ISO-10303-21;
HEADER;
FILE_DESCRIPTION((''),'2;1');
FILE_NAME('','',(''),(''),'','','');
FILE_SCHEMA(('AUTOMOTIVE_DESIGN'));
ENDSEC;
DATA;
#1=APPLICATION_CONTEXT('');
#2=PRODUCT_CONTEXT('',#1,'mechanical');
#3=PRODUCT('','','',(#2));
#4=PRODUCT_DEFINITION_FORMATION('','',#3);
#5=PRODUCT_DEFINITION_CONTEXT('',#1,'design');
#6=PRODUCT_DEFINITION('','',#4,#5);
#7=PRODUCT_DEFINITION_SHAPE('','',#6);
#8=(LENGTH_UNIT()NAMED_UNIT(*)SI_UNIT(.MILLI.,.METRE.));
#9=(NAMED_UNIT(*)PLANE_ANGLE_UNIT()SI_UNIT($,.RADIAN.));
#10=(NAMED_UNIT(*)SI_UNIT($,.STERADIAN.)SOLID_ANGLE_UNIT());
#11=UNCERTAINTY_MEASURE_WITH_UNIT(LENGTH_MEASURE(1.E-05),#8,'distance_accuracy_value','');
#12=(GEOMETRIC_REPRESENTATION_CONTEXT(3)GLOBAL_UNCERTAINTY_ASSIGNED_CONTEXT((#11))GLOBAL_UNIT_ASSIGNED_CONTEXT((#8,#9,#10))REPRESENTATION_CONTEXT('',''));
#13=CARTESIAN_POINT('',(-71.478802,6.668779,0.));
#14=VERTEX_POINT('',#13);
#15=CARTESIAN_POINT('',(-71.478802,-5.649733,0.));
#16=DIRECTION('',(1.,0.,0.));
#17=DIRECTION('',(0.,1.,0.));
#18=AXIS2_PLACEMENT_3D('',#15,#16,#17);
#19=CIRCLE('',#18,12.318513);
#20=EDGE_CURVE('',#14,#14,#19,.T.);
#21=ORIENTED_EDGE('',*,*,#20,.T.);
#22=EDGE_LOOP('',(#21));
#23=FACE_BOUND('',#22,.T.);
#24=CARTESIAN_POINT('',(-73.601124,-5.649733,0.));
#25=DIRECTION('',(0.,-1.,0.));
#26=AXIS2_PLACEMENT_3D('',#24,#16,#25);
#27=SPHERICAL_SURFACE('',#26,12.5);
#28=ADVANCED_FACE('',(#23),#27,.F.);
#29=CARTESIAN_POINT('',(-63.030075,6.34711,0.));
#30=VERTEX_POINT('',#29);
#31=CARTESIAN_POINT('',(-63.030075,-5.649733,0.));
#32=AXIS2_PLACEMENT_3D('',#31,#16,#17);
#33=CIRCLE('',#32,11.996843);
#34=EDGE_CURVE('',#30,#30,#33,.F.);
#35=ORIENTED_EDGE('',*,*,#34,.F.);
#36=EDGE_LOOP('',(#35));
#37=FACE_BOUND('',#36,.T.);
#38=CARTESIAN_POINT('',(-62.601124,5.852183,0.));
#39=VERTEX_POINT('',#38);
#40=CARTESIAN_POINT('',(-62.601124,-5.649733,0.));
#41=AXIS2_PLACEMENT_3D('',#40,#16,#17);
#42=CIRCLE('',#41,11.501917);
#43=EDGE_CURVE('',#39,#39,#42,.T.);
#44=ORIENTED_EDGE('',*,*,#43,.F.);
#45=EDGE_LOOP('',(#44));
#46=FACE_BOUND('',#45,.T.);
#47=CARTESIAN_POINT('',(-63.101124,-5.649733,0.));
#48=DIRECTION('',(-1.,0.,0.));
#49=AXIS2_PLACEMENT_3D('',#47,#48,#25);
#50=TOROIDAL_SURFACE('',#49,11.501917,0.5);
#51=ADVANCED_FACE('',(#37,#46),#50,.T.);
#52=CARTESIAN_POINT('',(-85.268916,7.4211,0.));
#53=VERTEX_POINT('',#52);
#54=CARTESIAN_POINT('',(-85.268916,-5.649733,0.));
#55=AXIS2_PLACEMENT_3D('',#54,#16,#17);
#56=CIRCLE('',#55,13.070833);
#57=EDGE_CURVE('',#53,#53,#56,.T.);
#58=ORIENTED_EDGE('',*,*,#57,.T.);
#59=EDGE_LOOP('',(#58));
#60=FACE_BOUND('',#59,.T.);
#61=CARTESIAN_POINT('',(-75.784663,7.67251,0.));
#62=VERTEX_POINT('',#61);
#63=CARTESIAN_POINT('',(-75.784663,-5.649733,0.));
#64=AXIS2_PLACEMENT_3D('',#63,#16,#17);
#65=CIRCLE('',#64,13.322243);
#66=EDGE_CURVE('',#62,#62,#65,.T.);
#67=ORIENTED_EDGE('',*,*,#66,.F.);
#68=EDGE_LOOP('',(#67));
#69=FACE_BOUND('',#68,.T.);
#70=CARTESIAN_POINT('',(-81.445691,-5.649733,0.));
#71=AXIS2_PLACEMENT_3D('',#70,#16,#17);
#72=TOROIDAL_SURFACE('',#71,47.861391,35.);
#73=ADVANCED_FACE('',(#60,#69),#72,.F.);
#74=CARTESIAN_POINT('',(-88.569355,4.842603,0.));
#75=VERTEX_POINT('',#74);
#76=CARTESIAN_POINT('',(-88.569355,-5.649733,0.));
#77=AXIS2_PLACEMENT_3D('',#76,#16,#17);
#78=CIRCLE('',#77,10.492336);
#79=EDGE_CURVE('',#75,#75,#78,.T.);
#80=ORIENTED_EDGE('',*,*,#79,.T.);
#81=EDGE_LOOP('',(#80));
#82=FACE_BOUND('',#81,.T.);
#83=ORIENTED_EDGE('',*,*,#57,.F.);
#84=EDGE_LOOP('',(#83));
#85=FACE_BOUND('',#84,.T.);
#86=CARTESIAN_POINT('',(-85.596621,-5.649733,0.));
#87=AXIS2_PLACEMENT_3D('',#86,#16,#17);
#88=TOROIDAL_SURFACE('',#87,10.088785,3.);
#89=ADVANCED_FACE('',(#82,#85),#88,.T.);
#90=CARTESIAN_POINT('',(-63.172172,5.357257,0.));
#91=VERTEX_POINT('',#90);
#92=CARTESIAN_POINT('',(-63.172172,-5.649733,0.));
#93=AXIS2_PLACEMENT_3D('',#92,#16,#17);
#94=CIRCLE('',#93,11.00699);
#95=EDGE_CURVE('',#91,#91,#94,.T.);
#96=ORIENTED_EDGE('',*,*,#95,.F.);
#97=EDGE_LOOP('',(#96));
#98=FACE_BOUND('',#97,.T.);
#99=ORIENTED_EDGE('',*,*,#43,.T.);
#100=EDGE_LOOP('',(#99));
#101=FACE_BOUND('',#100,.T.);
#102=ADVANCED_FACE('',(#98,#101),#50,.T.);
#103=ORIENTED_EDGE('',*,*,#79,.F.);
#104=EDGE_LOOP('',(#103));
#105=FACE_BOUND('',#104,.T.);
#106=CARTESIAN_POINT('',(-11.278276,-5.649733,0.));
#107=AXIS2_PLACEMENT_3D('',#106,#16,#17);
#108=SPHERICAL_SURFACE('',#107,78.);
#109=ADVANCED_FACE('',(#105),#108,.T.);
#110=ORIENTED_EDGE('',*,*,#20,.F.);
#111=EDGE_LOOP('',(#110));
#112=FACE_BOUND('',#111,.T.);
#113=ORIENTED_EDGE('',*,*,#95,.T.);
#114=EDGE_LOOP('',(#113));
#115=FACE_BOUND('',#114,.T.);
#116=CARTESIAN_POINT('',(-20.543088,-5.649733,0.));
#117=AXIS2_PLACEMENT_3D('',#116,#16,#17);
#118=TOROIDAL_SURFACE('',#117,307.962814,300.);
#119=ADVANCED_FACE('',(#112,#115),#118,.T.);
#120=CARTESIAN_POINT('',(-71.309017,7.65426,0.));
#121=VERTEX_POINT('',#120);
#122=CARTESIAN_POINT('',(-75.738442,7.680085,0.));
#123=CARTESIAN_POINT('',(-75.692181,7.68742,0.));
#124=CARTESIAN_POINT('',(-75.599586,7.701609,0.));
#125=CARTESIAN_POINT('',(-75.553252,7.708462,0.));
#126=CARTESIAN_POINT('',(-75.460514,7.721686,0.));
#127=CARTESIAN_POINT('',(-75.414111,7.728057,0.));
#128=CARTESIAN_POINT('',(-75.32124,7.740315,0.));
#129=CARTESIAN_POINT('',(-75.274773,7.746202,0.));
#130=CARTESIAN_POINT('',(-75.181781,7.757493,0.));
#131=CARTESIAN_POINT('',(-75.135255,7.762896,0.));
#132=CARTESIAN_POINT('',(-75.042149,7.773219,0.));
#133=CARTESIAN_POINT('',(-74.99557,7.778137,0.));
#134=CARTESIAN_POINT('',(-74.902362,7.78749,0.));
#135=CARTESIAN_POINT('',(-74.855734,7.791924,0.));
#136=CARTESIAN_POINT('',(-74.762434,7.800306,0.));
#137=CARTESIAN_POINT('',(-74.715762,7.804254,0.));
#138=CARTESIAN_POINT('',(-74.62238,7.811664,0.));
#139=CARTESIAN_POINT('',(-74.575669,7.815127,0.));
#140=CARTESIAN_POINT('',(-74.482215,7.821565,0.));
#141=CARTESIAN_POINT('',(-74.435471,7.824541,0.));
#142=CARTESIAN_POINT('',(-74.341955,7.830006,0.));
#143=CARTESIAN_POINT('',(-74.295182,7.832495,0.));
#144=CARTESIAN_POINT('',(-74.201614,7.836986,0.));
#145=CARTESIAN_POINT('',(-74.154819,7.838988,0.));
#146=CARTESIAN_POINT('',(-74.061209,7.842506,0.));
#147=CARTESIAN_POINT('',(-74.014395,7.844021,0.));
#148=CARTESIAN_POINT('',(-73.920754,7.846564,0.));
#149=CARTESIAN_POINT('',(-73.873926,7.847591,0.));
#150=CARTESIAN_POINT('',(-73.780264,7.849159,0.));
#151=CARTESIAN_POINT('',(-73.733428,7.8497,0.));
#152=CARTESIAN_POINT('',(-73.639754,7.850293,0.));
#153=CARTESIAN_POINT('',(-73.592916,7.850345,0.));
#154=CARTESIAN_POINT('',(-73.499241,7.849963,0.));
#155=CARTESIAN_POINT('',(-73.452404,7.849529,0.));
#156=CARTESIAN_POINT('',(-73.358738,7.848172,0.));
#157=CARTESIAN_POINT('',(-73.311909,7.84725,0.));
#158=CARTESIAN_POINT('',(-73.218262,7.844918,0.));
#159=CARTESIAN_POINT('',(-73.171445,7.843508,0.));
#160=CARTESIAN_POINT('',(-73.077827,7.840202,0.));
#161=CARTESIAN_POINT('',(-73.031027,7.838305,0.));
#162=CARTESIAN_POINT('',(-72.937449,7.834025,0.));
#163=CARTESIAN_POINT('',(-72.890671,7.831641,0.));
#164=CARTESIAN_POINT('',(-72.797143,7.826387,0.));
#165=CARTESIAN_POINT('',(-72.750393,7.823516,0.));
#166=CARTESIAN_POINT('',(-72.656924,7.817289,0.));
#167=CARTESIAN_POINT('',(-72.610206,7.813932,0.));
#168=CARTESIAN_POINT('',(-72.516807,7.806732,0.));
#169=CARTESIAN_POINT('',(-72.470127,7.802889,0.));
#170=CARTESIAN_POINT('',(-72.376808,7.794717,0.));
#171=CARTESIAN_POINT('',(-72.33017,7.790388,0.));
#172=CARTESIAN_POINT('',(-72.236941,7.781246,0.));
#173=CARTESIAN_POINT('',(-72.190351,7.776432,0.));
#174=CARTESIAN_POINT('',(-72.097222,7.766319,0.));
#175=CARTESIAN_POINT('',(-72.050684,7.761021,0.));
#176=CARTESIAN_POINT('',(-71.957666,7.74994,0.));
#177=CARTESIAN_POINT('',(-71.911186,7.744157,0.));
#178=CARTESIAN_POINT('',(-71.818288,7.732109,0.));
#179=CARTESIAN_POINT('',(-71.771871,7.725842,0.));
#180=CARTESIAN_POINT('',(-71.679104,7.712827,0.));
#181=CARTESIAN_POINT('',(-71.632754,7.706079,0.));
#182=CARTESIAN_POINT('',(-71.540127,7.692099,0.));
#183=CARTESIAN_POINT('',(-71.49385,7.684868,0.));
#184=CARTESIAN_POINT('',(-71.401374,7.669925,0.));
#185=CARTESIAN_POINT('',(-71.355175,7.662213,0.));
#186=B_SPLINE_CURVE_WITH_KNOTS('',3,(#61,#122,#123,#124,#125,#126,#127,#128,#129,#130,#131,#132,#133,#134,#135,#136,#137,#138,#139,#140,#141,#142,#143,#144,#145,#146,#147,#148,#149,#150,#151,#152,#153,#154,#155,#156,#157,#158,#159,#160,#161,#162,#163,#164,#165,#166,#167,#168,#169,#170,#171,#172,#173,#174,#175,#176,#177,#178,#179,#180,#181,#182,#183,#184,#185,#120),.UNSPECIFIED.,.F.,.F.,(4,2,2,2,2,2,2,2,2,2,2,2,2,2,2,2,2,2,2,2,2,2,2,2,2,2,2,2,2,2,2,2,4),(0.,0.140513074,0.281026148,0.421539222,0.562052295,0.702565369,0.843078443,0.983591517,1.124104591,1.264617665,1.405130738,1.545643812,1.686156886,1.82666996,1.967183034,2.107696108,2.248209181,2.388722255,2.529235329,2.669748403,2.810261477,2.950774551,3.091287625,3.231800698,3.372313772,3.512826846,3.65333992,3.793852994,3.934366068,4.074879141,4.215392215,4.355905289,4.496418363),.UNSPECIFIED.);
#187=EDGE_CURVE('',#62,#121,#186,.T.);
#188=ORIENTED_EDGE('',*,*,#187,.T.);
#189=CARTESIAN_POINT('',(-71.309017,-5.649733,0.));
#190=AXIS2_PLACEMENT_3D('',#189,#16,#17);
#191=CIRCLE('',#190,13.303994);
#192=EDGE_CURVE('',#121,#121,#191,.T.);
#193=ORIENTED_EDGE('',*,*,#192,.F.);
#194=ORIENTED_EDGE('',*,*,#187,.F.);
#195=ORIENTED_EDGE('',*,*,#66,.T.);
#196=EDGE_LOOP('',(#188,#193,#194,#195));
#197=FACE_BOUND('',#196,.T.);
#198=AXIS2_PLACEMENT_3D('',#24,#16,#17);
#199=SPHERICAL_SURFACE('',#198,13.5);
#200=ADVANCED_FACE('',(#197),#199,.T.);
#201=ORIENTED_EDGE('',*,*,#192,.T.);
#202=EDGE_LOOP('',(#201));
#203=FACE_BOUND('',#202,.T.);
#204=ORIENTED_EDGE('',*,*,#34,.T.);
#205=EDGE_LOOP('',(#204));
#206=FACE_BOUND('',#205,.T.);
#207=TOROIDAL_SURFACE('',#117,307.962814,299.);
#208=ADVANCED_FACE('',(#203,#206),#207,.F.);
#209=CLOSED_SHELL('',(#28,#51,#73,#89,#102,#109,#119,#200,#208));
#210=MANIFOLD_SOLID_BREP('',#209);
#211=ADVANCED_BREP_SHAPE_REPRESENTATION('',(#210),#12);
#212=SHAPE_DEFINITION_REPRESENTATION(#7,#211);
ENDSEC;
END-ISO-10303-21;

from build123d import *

# Parameters (mm, degrees)
FILLET1_R = 0.5


with BuildPart() as part:
    # Sketch2 → Revolve1 (revolve)
    with BuildSketch(Plane.XY):
        with BuildLine():
            Line((-86.101123841, -5.64973336), (-88.101123841, -5.64973336))
            Line((-88.101123841, -5.64973336), (-89.278275677, -5.64973336))
            ThreePointArc((-89.278275677, -5.64973336), (-89.10084359, -0.391604097), (-88.569354565, 4.842603093))
            ThreePointArc((-88.569354565, 4.842603093), (-87.443565623, 6.803114863), (-85.26891575, 7.421099549))
            ThreePointArc((-85.26891575, 7.421099549), (-80.518231075, 7.223948348), (-75.784663044, 7.672509564))
            ThreePointArc((-75.784663044, 7.672509564), (-73.546078322, 7.850154417), (-71.309016698, 7.654260207))
            ThreePointArc((-71.309016698, 7.654260207), (-66.960113272, 6.937963646), (-62.601123841, 6.28584947))
            Line((-62.601123841, 6.28584947), (-62.601123841, 5.275841234))
            ThreePointArc((-62.601123841, 5.275841234), (-67.04517898, 5.939067763), (-71.478802412, 6.668779202))
            ThreePointArc((-71.478802412, 6.668779202), (-81.654724965, 3.910052669), (-86.101123841, -5.64973336))
        make_face()
    revolve(axis=Axis((86.398876159, -5.64973336, 0), (-1, 0, 0)))

    # Fillet1
    # the kernel refuses this fillet: 0.5 mm, written as the material it takes off along each edge
    with BuildSketch(Plane(origin=(-62.601123841, -5.64973336, 0), x_dir=(0, 1, 0), z_dir=(0, 0, 1))) as fillet1_piece_1:
        with BuildLine():
            CenterArc((11.501916817, 0.5), FILLET1_R, 270, 81.83079423)
            ThreePointArc((11.99684319, 0.428951526), (11.966135307, 0.21448686), (11.93558283, 0))
            Line((11.93558283, 0), (11.501916817, 0))
        make_face()
    revolve(axis=Axis((-62.601123841, -5.64973336, 0), (-1, 0, 0)), mode=Mode.SUBTRACT)
    with BuildSketch(Plane(origin=(-62.601123841, -5.64973336, 0), x_dir=(0, 1, 0), z_dir=(0, 0, 1))) as fillet1_piece_2:
        with BuildLine():
            CenterArc((11.501916817, 0.5), FILLET1_R, 171.83079423, 98.16920577)
            ThreePointArc((11.006990445, 0.571048474), (10.966145272, 0.285543805), (10.925574594, 0))
            Line((10.925574594, 0), (11.501916817, 0))
        make_face()
    revolve(axis=Axis((-62.601123841, -5.64973336, 0), (-1, 0, 0)), mode=Mode.SUBTRACT)


solid = part.part
